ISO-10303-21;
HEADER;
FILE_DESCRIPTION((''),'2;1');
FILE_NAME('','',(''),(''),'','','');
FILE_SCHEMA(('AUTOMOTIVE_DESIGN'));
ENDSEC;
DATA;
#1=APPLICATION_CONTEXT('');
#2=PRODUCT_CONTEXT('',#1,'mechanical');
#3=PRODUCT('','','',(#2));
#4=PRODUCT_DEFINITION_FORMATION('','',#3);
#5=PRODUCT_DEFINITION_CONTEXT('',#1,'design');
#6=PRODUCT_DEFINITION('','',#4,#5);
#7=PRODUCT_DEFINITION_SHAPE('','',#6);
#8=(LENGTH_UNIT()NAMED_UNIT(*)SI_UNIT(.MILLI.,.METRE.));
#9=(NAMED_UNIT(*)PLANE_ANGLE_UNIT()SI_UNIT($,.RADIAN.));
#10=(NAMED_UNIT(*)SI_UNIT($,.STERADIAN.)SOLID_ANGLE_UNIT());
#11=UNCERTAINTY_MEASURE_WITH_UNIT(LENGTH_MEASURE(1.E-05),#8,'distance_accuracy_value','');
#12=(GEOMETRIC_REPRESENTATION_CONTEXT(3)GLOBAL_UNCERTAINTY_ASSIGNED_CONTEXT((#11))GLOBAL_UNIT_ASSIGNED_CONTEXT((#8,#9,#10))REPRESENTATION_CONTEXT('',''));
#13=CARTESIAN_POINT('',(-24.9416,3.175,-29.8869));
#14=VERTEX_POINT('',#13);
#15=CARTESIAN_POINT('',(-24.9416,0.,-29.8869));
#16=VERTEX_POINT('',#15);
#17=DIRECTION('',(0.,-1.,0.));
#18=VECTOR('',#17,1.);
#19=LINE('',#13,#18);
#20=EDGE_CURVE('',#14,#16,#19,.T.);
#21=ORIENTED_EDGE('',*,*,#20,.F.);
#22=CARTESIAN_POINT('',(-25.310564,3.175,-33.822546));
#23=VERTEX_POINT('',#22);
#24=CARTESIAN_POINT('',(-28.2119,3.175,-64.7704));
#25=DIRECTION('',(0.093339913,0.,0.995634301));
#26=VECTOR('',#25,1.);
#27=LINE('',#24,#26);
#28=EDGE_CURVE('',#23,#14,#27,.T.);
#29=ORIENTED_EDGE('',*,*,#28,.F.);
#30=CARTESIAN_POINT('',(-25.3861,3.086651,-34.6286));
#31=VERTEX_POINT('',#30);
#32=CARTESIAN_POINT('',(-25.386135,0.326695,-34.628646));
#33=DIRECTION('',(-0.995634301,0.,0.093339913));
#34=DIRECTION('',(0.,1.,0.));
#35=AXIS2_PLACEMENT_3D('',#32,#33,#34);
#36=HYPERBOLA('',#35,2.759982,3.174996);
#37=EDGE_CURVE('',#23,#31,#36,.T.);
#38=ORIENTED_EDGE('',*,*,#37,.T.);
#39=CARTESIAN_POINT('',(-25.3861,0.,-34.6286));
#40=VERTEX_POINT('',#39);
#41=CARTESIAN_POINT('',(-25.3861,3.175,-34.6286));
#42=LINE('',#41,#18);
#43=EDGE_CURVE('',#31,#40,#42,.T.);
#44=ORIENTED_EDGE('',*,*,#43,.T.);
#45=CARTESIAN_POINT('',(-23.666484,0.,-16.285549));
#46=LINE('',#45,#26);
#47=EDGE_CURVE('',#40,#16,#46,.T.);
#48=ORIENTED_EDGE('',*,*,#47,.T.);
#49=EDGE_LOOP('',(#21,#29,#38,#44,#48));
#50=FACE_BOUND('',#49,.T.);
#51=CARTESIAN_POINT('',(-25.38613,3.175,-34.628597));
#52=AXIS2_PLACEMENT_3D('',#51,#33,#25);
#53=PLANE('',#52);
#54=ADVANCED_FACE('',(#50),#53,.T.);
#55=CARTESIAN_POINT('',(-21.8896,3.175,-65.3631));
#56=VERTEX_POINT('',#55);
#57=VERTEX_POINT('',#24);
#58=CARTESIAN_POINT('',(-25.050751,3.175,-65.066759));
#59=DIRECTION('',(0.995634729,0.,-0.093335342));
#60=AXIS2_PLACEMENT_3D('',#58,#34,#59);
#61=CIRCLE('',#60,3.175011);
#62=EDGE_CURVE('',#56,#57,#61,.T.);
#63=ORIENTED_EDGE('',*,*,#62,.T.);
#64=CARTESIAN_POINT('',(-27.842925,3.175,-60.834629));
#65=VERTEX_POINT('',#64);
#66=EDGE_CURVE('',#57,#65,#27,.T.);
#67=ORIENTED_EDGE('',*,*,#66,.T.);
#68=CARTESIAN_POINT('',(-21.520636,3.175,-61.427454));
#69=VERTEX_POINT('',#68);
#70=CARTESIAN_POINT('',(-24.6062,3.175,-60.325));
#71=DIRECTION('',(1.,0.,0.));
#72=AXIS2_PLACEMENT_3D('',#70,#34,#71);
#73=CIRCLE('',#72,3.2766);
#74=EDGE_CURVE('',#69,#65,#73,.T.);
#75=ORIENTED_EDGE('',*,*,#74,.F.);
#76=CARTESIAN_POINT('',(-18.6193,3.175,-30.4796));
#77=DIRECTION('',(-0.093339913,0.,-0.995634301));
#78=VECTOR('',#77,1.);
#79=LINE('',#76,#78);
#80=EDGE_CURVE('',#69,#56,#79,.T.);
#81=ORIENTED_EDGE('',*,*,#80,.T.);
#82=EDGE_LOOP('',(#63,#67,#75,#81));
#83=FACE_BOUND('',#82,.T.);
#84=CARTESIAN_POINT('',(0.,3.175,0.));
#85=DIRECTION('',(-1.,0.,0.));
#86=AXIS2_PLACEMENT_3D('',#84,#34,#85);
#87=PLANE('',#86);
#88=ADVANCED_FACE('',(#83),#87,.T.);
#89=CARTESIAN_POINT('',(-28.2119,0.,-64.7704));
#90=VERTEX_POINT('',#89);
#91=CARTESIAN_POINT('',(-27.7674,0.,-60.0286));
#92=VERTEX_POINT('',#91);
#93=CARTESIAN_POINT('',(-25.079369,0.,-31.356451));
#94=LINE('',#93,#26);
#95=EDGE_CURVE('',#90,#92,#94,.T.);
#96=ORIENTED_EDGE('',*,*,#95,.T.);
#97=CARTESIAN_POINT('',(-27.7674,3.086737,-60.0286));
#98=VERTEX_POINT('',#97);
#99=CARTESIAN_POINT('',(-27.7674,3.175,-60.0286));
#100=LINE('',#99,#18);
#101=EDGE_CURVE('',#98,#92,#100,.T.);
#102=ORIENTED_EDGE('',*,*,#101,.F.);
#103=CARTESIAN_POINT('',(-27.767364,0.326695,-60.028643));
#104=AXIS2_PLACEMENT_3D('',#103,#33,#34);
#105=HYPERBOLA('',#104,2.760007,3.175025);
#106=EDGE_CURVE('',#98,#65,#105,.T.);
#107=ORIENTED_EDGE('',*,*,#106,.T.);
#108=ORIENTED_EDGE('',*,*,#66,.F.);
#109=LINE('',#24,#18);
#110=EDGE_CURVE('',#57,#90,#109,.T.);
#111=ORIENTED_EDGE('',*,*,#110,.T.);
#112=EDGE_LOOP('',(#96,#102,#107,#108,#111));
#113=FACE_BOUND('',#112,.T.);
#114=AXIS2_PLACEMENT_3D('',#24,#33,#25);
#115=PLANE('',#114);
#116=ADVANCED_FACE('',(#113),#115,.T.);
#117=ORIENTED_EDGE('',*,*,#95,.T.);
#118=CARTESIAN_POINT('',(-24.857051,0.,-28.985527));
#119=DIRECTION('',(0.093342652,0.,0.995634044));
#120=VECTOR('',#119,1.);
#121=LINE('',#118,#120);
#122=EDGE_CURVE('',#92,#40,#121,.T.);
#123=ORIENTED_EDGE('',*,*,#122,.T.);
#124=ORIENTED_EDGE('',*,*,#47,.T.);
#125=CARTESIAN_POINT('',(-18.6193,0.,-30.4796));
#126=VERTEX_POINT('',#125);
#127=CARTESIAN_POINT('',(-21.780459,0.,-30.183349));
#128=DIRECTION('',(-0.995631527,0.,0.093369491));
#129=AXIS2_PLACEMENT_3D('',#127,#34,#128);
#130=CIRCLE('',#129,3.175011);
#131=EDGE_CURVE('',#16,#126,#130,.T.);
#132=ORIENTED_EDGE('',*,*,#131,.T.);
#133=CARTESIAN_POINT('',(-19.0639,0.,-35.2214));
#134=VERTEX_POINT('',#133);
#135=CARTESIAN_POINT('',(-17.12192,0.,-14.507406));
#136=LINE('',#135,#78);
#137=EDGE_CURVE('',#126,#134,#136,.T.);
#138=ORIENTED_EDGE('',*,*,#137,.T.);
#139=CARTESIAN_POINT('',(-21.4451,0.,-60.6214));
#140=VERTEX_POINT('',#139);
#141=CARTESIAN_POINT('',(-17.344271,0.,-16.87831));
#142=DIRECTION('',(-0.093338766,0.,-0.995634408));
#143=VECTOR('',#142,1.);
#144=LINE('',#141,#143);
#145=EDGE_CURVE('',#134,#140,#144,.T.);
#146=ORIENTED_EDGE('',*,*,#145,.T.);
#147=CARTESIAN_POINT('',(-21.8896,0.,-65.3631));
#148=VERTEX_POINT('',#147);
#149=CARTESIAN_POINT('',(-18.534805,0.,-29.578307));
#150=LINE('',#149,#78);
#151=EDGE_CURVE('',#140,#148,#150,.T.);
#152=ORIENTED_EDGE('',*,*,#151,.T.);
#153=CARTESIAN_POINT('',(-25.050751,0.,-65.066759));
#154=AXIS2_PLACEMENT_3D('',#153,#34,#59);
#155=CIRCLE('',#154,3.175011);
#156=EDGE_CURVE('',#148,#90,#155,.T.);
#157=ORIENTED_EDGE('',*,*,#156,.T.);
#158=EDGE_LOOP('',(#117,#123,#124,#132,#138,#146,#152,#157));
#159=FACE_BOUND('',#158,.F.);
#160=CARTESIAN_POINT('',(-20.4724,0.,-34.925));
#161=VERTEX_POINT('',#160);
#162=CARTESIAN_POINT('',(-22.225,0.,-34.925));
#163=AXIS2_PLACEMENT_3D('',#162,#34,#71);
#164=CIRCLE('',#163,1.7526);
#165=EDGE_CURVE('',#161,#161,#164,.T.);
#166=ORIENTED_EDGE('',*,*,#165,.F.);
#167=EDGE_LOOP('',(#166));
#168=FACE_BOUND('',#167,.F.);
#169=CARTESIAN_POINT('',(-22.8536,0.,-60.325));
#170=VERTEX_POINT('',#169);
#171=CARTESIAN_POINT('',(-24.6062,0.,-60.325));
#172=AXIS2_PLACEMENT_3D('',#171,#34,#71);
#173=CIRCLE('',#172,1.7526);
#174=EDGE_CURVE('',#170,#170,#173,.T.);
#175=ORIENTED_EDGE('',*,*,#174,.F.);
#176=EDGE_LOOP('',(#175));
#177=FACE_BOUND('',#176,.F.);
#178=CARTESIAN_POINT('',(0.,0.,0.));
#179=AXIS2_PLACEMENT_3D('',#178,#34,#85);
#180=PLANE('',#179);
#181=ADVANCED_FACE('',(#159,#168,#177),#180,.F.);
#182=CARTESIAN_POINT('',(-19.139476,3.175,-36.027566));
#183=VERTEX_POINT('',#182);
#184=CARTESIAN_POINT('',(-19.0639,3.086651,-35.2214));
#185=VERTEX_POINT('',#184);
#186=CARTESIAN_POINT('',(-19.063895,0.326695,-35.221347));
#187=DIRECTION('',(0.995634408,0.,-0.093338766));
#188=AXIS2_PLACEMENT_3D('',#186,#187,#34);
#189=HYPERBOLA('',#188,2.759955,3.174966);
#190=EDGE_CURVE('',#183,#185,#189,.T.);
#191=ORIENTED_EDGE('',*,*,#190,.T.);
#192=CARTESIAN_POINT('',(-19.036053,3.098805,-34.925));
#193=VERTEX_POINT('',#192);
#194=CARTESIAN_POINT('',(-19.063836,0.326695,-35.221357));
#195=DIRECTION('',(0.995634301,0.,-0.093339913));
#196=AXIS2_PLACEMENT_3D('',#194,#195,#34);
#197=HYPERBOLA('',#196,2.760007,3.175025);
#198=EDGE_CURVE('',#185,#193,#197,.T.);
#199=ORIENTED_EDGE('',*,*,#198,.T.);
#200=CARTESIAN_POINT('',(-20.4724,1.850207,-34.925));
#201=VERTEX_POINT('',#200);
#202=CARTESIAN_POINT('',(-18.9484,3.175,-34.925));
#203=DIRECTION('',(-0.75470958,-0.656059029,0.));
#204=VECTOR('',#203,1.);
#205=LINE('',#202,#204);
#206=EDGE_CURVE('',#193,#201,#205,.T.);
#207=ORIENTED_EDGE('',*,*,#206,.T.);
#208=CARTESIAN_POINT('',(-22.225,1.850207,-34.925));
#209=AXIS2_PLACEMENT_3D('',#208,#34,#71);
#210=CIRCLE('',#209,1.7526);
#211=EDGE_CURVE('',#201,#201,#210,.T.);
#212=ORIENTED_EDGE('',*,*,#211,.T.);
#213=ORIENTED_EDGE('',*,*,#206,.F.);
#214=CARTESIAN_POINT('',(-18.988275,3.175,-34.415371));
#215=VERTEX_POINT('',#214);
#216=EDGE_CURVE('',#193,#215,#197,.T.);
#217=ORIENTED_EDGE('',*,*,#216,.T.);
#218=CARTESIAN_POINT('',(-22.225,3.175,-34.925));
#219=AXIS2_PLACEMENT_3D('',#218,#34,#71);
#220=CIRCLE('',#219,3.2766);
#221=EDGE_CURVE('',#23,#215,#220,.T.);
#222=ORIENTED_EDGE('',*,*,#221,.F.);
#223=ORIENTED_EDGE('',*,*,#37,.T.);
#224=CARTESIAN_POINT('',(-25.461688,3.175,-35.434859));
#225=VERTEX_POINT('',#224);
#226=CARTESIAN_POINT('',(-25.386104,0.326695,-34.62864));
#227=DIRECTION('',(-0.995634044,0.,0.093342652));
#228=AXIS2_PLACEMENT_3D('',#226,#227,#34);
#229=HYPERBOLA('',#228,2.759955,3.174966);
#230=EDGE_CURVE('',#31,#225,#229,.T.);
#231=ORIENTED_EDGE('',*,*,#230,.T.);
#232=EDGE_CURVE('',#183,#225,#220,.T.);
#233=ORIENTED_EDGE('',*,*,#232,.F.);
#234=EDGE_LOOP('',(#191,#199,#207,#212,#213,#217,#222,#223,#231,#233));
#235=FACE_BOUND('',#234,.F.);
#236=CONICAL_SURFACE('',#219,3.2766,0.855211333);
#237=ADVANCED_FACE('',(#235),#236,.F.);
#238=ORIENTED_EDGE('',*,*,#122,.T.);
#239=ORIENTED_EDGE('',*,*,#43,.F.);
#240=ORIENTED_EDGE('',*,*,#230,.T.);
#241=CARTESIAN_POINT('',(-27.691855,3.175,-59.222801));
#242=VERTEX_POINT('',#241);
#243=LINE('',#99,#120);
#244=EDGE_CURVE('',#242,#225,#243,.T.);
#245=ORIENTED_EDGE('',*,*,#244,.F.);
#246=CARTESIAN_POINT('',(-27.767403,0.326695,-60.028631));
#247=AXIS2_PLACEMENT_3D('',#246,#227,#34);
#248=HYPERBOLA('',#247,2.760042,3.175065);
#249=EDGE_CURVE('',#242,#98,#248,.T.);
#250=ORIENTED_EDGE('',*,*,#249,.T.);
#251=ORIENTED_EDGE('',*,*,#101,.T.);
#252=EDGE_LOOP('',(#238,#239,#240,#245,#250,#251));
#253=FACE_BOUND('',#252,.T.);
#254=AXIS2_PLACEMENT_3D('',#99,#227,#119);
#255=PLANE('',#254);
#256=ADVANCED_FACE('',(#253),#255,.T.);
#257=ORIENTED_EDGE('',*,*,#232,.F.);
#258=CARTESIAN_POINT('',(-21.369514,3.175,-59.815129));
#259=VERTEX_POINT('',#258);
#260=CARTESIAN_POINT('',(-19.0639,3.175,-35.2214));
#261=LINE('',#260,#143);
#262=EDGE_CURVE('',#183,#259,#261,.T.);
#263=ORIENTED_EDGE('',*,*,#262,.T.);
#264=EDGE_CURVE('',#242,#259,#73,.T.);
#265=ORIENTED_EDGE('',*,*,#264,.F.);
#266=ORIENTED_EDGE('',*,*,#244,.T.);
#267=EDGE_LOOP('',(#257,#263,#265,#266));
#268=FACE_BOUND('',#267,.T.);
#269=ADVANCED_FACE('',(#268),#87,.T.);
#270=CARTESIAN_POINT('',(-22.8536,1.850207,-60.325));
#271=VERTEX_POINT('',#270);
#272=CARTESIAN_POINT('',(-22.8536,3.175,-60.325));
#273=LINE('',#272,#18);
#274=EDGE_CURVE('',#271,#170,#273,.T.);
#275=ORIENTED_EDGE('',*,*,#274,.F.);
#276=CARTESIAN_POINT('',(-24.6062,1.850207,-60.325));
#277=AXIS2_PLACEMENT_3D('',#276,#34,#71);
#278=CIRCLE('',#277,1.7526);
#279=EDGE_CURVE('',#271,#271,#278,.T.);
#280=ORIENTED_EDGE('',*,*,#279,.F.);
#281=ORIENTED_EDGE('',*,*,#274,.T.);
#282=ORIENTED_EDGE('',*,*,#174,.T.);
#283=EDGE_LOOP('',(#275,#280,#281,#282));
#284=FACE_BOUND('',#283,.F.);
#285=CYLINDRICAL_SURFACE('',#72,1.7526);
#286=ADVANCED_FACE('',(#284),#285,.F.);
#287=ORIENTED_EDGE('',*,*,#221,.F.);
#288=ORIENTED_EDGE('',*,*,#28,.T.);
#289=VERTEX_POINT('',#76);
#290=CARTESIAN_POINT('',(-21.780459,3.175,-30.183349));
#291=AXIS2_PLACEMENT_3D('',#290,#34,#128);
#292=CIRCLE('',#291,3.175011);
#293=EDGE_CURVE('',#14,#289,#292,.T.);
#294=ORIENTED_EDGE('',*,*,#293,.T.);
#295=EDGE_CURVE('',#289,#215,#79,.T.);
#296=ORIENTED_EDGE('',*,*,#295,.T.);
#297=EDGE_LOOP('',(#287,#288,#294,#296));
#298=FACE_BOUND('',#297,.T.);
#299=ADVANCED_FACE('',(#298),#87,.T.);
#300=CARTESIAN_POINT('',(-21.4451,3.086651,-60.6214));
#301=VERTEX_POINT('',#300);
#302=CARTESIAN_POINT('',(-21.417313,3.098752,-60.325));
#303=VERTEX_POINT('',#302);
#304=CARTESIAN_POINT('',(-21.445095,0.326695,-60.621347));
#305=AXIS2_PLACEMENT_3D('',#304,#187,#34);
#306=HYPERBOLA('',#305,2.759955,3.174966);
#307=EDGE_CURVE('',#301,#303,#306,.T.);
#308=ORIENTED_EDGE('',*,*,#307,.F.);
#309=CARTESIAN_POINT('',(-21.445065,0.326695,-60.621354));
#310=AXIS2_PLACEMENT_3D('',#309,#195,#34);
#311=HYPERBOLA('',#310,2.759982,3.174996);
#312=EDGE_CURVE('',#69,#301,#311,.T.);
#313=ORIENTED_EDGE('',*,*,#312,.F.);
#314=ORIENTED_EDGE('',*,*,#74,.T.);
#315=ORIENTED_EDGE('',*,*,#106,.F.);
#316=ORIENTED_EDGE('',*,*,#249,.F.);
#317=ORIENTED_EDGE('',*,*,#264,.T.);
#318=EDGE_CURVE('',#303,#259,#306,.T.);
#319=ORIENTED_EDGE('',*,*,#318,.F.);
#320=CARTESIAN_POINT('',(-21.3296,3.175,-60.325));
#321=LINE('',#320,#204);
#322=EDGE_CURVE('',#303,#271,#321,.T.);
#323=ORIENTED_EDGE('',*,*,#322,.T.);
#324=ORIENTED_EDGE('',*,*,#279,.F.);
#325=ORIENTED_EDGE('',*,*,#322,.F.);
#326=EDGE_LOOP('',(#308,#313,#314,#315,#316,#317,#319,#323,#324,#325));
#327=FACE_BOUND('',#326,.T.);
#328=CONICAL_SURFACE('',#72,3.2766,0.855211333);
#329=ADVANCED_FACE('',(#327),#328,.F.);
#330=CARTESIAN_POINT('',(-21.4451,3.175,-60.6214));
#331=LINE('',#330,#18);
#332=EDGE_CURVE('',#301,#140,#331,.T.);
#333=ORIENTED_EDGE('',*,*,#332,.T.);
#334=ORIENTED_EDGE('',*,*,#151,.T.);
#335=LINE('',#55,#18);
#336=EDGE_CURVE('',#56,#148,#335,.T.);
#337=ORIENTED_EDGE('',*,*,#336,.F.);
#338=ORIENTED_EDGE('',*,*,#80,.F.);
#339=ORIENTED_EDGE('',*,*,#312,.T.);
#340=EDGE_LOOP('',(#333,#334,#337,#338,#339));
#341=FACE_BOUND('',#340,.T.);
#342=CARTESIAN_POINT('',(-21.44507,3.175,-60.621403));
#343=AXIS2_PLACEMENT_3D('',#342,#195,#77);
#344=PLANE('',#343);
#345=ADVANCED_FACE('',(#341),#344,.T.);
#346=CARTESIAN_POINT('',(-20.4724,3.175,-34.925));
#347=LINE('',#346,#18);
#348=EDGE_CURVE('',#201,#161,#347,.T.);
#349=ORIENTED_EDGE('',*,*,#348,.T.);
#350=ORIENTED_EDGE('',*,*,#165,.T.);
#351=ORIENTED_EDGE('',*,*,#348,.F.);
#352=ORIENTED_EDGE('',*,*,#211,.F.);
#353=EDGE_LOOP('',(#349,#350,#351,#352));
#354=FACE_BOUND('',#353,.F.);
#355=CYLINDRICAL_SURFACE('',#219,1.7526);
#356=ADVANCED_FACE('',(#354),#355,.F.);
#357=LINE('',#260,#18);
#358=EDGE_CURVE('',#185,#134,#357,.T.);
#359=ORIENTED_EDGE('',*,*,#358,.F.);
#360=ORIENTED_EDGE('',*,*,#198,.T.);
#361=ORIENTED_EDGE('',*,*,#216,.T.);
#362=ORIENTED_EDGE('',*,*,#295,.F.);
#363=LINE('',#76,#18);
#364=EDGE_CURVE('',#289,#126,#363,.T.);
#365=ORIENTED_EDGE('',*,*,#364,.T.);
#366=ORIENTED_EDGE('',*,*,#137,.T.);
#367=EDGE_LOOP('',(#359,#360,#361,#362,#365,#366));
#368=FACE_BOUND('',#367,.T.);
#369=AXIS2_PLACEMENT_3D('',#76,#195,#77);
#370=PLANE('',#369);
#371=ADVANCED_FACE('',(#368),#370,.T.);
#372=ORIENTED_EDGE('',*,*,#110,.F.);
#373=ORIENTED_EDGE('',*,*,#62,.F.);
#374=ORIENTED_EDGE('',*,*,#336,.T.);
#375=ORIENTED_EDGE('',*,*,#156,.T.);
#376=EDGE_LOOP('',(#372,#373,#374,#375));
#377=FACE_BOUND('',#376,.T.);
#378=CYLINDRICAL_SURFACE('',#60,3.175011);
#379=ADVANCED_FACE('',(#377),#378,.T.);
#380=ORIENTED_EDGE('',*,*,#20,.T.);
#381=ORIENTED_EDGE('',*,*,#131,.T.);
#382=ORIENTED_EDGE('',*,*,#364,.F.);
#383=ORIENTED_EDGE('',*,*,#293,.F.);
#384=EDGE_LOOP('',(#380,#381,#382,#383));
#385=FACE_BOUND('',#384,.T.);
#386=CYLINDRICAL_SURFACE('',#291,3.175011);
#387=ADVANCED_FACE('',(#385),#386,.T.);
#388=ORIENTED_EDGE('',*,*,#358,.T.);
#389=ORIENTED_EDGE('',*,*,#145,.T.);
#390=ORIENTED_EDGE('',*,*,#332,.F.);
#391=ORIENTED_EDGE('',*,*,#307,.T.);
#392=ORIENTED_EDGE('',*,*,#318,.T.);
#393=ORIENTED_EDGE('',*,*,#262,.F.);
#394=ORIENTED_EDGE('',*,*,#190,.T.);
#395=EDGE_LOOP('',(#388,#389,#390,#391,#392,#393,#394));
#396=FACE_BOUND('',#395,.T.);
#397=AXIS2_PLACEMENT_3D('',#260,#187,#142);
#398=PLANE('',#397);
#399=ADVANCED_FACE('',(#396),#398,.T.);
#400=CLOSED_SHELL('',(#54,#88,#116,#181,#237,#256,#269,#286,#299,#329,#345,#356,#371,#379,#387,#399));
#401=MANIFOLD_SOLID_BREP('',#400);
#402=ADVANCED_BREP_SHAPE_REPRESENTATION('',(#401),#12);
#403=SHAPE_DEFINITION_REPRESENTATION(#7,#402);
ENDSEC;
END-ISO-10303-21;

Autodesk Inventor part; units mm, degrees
ref_plane "YZ Plane" through (0, 0, 0) normal (1, 0, 0) x (0, 1, 0)
ref_plane "XZ Plane" through (0, 0, 0) normal (0, 1, 0) x (-1, 0, 0)
ref_plane "XY Plane" through (0, 0, 0) normal (0, 0, 1) x (1, 0, 0)
sketch "Sketch1" plane through (0, 0, 0) normal (0, 1, 0) x (-1, 0, 0)
  circle A0 centre (0, 0) radius 73.025
  line L0 (0, 0) -> (0, -73.025) construction
  line L1 (0, 0) -> (-12.6807, -71.9156)
  line L2 (0, 0) -> (12.6807, -71.9156)
  line L3 (0, 0) -> (72.3143, -10.1631)
  line L4 (0, 0) -> (64.4772, -34.2832)
  line L5 (0, 0) -> (32.0121, 65.6344)
  line L6 (0, 0) -> (52.5298, 50.7274)
  line L7 (0, 0) -> (-52.5298, 50.7274)
  line L8 (0, 0) -> (-32.0121, 65.6344)
  line L9 (0, 0) -> (-64.4772, -34.2832)
  line L10 (0, 0) -> (-72.3143, -10.1631)
  circle A1 centre (0, 0) radius 69.85
  arc A2 (4.7597, -69.6876) -> (-4.7597, -69.6876) centre (0, -69.85) ccw
  arc A3 (67.7477, -17.0079) -> (64.806, -26.0614) centre (66.4313, -21.5848) ccw
  arc A4 (37.1107, 59.1762) -> (44.8121, 53.5808) centre (41.0568, 56.5098) ccw
  arc A5 (-44.8121, 53.5808) -> (-37.1107, 59.1762) centre (-41.0568, 56.5098) ccw
  arc A6 (-64.806, -26.0614) -> (-67.7477, -17.0079) centre (-66.4313, -21.5848) ccw
  point P0 (61.6739, -32.7926)
  point P1 (69.1702, -9.7212)
  point P2 (50.2459, 48.5219)
  point P3 (30.6202, 62.7808)
  point P4 (-30.6202, 62.7808)
  point P5 (-50.2459, 48.5219)
  point P6 (-69.1702, -9.7212)
  point P7 (-61.6739, -32.7926)
  point P8 (-12.1293, -68.7888)
  point P9 (12.1293, -68.7888)
  point P10 (64.806, -26.0614)
  point P11 (67.7477, -17.0079)
  point P12 (44.8121, 53.5808)
  point P13 (37.1107, 59.1762)
  point P14 (-37.1107, 59.1762)
  point P15 (-67.7477, -17.0079)
  dimension "d0" = 146.05
  dimension "d1" = 10
  dimension "d4" = 360
  dimension "d6" = 3.175
  dimension "d10" = 9.525
  dimension "d13" = 360
extrude "Extrusion1" add sketch "Sketch1" along normal blind 3.175 contours A0 L3 A1 L6 | L5 A1 L8 A0 | A1 L3 L6 | L6 L5 A1 A4 | A0 L2 A1 L4 | A1 A3 L4 L3 | L5 L8 A1 | L2 A1 A2 L1 | L4 A1 L2 | L10 A1 L7 | L7 A1 A5 L8 | L1 A1 L9 | L9 A1 A6 L10 | A0 L1 A1 L2 | L7 A1 L10 A0 | L1 A0 L9 A1 | A2 A1
fillet "Fillet1" radius 1.5875 24 edges at (30.6202, 1.5875, 62.7808) (32.0121, 1.5875, 65.6344) (-30.6202, 1.5875, 62.7808) (-32.0121, 1.5875, 65.6344) (-52.5298, 1.5875, 50.7274) (-50.2459, 1.5875, 48.5219) (52.5298, 1.5875, 50.7274) (50.2459, 1.5875, 48.5219) (64.4772, 1.5875, -34.2832) (61.6739, 1.5875, -32.7926) (72.3143, 1.5875, -10.1631) (69.1702, 1.5875, -9.7212) (-72.3143, 1.5875, -10.1631) (-69.1702, 1.5875, -9.7212) (-64.4772, 1.5875, -34.2832) (-61.6739, 1.5875, -32.7926) (37.1107, 1.5875, 59.1762) (44.8121, 1.5875, 53.5808) (-44.8121, 1.5875, 53.5808) (-37.1107, 1.5875, 59.1762) (-64.806, 1.5875, -26.0614) (-67.7477, 1.5875, -17.0079) (67.7477, 1.5875, -17.0079) (64.806, 1.5875, -26.0614)
sketch "Sketch5" plane through (0, 3.175, 0) normal (0, 1, 0) x (1, 0, 0)
  line L0 (0, 0) -> (0, 65.0875) construction
  circle A0 centre (0, 50.8) radius 22.225 construction
  arc A1 (63.6995, 35.7075) -> (-63.6995, 35.7075) centre (0, 0) ccw projected
  circle A2 centre (0, 50.8) radius 12.5 construction
  circle A3 centre (-24.6062, 60.325) radius 1.7526
  circle A4 centre (-24.6062, 60.325) radius 3.175 construction
  circle A5 centre (-22.225, 34.925) radius 3.175 construction
  circle A6 centre (-22.225, 34.925) radius 1.7526
  circle A7 centre (24.6062, 60.325) radius 1.7526 construction
  circle A8 centre (24.6062, 60.325) radius 3.175 construction
  circle A9 centre (22.225, 34.925) radius 3.175 construction
  circle A10 centre (22.225, 34.925) radius 1.7526 construction
  arc A11 (-62.3874, 31.414) -> (-64.248, 27.4085) centre (0, 0) ccw projected
  arc A12 (63.6995, 35.7075) -> (-63.6995, 35.7075) centre (0, 0) ccw projected
  line L1 (-28.4451, 67.2572) -> (-25.3861, 34.6286) construction
  line L2 (-22.7046, 31.7864) -> (-3.3572, 28.83) construction
  line L3 (28.4451, 67.2572) -> (25.3861, 34.6286) construction
  line L4 (22.7046, 31.7864) -> (3.3572, 28.83) construction
  circle A13 centre (0, 50.8) radius 6.35 construction
  circle A14 centre (0, 0) radius 73.025
  line L5 (0, 50.8) -> (-8.8388, 59.6388) construction
  circle A15 centre (0, 50.8) radius 9.5 construction
  line L6 (0, 50.8) -> (6.7175, 57.5175) construction
  circle A16 centre (-8.8388, 59.6388) radius 1.5 construction
  circle A17 centre (6.7175, 57.5175) radius 1.5 construction
  circle A18 centre (8.8388, 41.9612) radius 1.5 construction
  circle A19 centre (-6.7175, 44.0825) radius 1.5 construction
  line L7 (-24.6062, 60.325) -> (-22.225, 34.925) construction
  line L8 (-27.7674, 60.0286) -> (-25.3861, 34.6286)
  line L9 (-19.0639, 35.2214) -> (-21.4451, 60.6214)
  arc A20 (-21.4451, 60.6214) -> (-27.7674, 60.0286) centre (-24.6062, 60.325) ccw
  arc A21 (-25.3861, 34.6286) -> (-19.0639, 35.2214) centre (-22.225, 34.925) ccw
  circle A22 centre (-22.225, 34.925) radius 4.7625 construction
  circle A23 centre (-24.6062, 60.325) radius 4.7625 construction
  line L10 (-21.7805, 30.1833) -> (-25.0508, 65.0667) construction
  line L11 (-18.6193, 30.4796) -> (-21.8896, 65.3631)
  line L12 (-28.2119, 64.7704) -> (-24.9416, 29.8869)
  arc A24 (-24.9416, 29.8869) -> (-18.6193, 30.4796) centre (-21.7805, 30.1833) ccw
  arc A25 (-21.8896, 65.3631) -> (-28.2119, 64.7704) centre (-25.0508, 65.0667) ccw
  point P0 (-63.6995, 35.7075)
  point P1 (-23.4156, 47.625)
  point P2 (-63.6995, 35.7075)
  point P3 (-23.4156, 47.625)
  point P4 (-28.3025, 67.3173)
  point P5 (-23.3151, 69.203)
  dimension "d39" = 25
  dimension "d40" = 44.45
  dimension "d78" = 19
  dimension "d100" = 9.525
  dimension "d101" = 9.525
  dimension "d41" = 3.5052
  dimension "d42" = 6.35
  dimension "d43" = 9.525
  dimension "d44" = 24.6062
  dimension "d45" = 6.35
  dimension "d46" = 3.5052
  dimension "d47" = 15.875
  dimension "d48" = 22.225
  dimension "d68" = 12.7
  dimension "d77" = 315
  dimension "d79" = 3
  dimension "d80" = 3
  dimension "d83" = 360
  dimension "d102" = 6.35
extrude "Extrusion3" cut sketch "Sketch5" against normal blind 25.4
chamfer "Chamfer2" distance 1.524 angle 41 2 edges at (-23.9776, 3.175, -34.925) (-26.3589, 3.175, -60.325)
equation "\"d45\" = d42"
equation "\"d46\" = d41"
properties part number "Top Plate" material "UHMW, White"
